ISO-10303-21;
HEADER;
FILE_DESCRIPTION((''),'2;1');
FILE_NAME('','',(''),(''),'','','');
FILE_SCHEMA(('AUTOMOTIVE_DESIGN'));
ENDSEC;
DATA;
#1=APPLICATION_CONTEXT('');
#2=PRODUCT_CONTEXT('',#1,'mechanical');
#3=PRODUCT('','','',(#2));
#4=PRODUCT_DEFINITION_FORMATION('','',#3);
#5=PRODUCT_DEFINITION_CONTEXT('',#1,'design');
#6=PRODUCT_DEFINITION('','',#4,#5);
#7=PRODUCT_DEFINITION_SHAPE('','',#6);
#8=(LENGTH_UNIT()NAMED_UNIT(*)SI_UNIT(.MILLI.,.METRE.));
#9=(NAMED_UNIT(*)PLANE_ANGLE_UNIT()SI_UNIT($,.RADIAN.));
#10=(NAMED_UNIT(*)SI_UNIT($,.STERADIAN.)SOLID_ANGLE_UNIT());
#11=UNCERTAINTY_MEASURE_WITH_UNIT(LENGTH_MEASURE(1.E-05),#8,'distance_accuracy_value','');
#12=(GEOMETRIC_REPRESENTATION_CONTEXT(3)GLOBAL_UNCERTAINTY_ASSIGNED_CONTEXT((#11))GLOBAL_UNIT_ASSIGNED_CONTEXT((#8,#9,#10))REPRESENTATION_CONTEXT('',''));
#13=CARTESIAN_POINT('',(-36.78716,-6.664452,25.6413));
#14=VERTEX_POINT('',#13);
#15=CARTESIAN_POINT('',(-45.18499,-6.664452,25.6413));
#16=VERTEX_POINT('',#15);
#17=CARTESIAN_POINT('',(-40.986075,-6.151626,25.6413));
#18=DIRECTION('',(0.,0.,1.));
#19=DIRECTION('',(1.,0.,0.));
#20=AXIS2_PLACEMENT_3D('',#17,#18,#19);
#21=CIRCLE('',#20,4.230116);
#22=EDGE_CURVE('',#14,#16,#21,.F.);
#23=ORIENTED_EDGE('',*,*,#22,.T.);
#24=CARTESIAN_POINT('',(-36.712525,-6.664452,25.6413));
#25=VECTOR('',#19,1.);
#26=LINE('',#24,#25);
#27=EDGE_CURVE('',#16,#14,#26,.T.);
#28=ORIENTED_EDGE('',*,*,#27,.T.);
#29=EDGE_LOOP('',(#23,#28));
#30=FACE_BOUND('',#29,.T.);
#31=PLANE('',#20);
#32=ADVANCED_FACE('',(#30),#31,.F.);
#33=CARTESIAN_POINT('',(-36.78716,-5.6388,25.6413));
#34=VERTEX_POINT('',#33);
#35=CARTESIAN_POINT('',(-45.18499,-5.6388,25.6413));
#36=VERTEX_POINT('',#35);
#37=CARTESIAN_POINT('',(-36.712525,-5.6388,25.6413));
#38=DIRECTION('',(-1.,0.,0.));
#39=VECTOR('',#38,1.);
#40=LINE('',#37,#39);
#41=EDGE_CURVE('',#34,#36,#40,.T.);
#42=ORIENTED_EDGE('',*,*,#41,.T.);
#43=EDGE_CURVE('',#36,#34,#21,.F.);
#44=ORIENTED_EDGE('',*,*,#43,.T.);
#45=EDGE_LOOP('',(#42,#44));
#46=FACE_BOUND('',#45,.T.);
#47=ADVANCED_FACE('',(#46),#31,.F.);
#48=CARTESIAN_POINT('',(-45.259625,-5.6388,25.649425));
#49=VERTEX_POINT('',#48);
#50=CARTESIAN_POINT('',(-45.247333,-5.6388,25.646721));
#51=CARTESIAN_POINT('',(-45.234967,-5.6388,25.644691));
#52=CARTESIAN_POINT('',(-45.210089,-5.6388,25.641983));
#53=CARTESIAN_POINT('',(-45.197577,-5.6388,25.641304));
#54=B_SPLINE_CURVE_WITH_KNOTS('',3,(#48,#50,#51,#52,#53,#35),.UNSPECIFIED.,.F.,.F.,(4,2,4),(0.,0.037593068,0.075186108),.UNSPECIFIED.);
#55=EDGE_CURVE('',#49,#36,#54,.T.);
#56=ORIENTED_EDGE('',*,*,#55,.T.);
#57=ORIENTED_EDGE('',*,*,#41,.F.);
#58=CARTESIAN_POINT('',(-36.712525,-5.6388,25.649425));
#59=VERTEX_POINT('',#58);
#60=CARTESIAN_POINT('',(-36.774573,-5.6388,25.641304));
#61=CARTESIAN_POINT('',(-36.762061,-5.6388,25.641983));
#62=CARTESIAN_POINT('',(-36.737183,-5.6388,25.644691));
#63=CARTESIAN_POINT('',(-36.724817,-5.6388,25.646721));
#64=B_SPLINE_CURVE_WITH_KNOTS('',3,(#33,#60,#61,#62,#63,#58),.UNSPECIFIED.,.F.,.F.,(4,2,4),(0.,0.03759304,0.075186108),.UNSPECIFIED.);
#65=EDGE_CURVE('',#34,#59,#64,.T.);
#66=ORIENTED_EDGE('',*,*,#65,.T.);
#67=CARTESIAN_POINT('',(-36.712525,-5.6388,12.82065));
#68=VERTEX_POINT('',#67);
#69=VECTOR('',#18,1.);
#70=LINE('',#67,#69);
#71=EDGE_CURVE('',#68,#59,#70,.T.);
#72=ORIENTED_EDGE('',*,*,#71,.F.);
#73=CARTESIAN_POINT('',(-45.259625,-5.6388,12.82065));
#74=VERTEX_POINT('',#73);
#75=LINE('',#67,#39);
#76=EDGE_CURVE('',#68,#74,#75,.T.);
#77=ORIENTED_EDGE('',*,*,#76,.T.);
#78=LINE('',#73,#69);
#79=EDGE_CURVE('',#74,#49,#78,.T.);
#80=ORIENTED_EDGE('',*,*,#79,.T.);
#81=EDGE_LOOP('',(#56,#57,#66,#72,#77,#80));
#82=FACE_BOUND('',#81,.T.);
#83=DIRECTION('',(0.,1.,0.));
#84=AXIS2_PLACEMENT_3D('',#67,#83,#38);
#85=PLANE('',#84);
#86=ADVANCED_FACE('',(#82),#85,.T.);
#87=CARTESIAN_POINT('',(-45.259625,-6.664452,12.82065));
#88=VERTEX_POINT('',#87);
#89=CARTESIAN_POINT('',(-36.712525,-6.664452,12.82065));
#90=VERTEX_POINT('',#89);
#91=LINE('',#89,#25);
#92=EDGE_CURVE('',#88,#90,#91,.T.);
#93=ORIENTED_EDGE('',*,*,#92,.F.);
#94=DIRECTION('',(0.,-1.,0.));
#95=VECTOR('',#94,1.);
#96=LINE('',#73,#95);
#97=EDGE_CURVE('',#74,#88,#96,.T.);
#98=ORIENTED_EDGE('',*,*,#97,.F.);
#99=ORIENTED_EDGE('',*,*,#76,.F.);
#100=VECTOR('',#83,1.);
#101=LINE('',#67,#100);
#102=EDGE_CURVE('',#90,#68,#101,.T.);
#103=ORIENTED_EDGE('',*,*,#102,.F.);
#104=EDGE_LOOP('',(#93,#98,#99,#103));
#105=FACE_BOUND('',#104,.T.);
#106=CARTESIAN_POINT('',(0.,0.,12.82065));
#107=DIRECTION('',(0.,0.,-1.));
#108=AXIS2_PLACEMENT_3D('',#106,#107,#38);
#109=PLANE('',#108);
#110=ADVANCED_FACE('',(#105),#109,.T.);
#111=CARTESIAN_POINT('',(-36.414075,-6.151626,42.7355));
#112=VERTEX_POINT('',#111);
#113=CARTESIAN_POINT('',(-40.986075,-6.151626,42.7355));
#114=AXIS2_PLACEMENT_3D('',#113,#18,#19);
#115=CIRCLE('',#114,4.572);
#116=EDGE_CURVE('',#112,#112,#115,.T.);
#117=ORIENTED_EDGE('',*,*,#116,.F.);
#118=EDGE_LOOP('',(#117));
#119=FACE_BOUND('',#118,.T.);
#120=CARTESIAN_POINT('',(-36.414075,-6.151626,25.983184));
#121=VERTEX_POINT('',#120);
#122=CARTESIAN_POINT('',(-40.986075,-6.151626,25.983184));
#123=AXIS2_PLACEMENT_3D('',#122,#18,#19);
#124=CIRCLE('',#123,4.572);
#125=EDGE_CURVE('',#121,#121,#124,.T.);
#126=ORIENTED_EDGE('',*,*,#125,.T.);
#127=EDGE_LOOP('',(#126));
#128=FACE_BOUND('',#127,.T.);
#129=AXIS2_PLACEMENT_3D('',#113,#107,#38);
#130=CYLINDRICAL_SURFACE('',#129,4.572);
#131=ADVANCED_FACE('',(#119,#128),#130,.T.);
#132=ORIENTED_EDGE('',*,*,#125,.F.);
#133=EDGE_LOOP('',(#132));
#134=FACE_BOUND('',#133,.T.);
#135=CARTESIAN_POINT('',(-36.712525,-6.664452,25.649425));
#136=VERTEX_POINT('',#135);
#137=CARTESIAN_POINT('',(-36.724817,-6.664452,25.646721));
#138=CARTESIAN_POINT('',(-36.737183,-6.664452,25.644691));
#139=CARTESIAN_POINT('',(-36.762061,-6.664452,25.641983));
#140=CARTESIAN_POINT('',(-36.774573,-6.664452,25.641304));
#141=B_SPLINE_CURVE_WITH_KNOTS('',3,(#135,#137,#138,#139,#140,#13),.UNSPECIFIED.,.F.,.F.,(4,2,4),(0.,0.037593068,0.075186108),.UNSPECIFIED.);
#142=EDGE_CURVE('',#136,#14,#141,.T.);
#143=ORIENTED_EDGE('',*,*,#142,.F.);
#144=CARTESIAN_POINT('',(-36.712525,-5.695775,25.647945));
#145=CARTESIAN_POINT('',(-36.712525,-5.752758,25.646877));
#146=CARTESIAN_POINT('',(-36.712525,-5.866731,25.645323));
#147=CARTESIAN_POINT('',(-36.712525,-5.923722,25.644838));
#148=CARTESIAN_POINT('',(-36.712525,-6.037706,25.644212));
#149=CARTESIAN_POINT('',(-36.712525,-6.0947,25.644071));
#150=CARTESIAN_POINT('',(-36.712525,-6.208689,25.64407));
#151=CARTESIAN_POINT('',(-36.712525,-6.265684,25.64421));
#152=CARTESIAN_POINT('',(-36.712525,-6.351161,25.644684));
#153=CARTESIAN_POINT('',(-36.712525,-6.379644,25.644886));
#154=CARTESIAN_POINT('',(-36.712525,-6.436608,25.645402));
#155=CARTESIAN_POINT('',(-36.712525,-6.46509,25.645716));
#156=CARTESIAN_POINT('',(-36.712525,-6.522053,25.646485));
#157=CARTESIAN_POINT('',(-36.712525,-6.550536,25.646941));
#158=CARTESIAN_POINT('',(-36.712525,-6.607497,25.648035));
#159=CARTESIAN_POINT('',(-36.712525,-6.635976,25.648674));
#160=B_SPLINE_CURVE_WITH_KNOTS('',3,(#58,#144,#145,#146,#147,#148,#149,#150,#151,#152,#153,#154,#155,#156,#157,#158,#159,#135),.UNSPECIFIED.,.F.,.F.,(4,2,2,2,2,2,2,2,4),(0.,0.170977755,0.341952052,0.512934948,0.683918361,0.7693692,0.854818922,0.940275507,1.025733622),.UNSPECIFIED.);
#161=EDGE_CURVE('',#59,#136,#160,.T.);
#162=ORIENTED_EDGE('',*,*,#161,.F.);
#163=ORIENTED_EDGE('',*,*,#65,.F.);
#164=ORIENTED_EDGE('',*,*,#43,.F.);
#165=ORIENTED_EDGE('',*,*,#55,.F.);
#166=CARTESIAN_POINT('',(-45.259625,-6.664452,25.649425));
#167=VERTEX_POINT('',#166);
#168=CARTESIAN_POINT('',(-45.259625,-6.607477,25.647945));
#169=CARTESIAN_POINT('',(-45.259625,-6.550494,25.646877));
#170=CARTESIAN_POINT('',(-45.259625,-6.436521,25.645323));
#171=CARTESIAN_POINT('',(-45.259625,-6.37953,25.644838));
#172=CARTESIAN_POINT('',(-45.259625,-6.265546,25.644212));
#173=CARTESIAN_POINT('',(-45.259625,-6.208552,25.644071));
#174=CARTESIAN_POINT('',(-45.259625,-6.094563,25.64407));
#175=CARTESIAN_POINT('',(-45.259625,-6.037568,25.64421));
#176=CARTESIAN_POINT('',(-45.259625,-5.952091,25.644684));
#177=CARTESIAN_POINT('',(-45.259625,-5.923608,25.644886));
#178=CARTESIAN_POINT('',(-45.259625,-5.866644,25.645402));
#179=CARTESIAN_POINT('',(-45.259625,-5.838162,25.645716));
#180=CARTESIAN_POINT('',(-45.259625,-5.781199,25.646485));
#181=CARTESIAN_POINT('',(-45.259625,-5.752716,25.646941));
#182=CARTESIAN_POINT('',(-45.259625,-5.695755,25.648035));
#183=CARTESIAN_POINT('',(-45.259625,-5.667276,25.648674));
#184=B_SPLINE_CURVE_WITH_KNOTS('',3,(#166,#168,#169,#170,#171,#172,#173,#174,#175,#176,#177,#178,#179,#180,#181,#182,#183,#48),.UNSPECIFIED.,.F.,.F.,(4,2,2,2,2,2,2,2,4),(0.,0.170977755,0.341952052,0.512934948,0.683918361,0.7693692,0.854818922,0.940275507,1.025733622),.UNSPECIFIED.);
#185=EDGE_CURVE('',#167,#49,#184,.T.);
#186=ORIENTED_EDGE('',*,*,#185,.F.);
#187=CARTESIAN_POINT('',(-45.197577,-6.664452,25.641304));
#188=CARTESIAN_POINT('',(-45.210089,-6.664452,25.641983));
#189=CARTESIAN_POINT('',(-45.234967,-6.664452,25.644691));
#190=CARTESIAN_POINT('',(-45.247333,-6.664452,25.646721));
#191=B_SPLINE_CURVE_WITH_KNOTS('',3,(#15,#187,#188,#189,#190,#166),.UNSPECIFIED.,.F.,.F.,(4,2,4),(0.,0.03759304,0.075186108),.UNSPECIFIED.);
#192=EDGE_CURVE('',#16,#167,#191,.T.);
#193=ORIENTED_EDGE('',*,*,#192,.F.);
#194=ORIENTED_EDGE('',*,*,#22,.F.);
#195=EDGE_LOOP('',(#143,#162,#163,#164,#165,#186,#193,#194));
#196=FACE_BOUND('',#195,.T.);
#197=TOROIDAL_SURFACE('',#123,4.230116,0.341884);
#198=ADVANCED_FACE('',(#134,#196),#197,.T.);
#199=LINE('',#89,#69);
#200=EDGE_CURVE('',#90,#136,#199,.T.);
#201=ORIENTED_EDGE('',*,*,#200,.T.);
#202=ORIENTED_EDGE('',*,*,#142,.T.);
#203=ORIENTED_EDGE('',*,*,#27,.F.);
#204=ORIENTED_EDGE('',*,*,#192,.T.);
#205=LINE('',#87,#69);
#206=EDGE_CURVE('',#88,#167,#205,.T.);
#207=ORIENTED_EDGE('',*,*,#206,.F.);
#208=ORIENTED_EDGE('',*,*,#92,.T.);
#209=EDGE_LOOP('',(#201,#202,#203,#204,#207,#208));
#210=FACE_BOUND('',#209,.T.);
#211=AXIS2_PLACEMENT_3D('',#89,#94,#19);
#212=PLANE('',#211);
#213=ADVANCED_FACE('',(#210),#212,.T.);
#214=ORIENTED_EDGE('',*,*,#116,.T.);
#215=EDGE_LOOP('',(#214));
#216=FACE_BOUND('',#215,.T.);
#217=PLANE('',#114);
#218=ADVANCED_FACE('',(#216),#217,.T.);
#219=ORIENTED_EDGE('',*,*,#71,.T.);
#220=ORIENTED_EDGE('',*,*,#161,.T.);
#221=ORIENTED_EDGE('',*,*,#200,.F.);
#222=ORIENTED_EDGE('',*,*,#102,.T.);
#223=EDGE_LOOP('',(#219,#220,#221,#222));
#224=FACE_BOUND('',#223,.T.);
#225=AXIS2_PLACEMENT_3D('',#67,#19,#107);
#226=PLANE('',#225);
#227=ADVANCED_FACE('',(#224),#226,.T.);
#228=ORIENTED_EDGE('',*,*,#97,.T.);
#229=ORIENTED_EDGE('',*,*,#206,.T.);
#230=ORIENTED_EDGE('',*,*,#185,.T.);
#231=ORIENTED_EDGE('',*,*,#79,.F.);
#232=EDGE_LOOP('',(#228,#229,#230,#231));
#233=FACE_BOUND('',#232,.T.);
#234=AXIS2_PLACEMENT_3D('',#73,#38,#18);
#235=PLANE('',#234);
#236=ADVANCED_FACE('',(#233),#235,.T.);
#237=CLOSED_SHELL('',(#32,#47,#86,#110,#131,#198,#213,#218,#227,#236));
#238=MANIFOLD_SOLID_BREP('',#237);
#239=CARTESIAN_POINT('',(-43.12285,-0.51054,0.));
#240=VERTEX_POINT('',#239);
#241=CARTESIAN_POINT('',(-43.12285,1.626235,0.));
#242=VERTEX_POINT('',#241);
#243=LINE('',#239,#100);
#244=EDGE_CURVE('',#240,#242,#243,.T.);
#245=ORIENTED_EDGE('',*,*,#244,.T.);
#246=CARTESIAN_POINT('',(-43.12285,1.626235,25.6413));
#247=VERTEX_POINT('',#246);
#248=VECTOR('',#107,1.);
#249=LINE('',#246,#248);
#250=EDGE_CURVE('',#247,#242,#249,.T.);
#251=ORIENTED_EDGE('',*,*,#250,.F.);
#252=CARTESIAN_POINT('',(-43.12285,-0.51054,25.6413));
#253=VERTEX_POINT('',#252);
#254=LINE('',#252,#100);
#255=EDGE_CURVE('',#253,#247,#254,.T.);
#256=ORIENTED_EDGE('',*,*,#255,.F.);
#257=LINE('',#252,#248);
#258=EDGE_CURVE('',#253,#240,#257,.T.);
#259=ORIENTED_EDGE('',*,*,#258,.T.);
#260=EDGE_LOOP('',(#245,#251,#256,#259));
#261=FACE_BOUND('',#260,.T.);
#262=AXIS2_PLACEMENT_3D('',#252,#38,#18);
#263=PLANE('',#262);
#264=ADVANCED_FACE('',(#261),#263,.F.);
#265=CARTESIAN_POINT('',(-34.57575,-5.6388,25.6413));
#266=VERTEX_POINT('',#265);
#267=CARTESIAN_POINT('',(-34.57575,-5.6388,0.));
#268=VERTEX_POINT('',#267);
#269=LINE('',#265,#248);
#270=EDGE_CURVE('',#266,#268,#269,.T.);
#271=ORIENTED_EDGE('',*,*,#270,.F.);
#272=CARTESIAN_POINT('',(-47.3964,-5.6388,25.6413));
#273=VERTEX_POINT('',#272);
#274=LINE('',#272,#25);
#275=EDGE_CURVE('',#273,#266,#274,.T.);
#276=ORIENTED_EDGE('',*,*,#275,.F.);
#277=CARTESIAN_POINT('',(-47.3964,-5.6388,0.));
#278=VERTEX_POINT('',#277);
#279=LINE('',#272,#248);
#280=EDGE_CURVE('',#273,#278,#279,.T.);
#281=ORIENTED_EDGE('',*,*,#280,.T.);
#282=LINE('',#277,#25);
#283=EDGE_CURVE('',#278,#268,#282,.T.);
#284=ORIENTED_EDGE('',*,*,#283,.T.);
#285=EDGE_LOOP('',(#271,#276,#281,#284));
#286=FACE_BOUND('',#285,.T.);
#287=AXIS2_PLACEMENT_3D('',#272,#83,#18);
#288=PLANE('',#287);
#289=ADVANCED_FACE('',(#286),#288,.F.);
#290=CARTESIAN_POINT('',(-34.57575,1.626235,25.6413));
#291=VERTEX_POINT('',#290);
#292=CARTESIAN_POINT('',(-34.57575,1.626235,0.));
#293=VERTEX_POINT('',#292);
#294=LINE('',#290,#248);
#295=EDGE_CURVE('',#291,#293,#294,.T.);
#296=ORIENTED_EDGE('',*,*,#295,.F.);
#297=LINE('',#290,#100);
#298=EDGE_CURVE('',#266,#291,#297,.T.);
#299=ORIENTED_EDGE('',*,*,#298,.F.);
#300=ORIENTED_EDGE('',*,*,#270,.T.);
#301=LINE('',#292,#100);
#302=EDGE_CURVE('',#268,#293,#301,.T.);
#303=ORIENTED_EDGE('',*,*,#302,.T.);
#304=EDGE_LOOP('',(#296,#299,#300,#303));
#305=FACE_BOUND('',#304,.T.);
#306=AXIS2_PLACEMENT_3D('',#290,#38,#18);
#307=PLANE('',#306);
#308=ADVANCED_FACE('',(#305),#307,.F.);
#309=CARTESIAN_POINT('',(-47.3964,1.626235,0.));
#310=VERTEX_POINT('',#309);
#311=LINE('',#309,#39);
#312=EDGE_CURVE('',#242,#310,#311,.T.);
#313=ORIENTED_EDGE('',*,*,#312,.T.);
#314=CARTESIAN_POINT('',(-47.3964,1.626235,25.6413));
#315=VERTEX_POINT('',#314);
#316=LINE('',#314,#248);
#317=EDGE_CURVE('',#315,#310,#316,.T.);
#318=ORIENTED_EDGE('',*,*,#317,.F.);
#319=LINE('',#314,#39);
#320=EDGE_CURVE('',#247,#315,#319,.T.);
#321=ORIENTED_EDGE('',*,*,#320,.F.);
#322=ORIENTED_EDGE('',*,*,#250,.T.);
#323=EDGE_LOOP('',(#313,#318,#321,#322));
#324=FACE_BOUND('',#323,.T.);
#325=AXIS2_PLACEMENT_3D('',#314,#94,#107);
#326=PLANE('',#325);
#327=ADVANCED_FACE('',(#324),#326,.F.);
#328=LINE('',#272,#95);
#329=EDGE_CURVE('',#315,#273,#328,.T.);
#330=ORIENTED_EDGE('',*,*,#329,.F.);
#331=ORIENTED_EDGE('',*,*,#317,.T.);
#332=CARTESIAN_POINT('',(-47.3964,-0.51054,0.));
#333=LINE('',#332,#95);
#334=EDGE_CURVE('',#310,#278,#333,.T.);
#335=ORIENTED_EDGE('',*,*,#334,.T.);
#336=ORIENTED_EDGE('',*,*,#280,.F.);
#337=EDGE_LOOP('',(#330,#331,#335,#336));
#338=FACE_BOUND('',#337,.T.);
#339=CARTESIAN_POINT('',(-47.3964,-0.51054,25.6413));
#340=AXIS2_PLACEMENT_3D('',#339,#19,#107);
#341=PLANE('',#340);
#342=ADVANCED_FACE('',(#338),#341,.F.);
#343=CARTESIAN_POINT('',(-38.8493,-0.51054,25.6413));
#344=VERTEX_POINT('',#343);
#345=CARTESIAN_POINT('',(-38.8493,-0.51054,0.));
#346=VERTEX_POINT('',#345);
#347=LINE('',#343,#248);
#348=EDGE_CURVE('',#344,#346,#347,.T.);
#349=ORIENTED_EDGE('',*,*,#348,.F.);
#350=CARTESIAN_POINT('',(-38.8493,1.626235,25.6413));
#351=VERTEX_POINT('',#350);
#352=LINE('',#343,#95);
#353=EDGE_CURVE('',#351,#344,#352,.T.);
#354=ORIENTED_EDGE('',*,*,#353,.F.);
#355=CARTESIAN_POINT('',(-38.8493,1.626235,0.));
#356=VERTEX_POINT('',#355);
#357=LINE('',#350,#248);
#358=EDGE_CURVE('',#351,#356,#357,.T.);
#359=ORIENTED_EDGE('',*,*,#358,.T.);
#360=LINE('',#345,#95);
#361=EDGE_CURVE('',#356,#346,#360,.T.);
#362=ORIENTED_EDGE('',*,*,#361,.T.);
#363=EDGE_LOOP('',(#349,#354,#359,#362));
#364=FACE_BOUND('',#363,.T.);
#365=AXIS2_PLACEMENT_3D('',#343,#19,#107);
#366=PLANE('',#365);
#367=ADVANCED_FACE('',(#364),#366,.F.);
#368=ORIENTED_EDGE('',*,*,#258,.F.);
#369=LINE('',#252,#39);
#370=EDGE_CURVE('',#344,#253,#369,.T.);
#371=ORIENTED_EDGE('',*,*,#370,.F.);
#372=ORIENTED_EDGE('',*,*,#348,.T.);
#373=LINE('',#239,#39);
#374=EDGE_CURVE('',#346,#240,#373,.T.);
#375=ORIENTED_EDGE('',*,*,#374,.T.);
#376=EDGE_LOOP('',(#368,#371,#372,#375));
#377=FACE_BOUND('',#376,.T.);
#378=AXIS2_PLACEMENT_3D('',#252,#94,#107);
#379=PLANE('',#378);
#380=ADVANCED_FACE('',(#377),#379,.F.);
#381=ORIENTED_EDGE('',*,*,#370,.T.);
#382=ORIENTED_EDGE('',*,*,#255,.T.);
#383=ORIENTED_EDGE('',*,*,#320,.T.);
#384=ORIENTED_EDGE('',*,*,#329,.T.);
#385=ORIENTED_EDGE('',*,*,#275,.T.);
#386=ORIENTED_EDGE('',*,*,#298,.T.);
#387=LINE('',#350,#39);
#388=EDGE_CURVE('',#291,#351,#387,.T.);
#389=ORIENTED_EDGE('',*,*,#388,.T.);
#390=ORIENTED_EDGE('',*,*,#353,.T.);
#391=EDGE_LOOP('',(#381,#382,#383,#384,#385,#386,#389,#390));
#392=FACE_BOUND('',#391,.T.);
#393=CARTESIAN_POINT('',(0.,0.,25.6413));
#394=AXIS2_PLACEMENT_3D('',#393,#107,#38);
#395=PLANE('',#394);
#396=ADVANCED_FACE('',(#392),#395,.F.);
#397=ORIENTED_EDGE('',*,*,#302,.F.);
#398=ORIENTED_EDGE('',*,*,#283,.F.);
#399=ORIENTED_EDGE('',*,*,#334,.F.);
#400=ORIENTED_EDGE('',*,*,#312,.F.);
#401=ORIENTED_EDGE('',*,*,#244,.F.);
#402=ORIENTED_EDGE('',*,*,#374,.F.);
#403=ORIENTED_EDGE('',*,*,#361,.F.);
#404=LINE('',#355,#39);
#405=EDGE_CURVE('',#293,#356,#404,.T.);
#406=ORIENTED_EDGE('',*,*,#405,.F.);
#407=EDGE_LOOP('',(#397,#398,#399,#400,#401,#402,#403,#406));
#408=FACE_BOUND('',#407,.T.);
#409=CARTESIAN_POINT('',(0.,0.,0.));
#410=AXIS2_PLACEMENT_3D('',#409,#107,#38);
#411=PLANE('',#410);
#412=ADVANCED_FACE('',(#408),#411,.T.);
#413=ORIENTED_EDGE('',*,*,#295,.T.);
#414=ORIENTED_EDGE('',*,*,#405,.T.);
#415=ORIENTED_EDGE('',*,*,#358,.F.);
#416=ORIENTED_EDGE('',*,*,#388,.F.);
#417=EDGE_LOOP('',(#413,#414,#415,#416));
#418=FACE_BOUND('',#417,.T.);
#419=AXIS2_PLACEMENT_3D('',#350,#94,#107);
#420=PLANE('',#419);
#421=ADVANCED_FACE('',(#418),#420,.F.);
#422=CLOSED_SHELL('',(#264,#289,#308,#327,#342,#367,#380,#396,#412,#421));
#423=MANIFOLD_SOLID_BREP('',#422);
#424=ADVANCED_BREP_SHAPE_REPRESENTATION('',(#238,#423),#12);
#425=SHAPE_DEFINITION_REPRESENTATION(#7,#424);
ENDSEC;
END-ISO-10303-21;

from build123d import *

# Parameters (mm, degrees)
BOSS_EXTRUDE1_DEPTH = 25.6413
SKETCH2_W           = 8.5471
SKETCH2_H           = 1.025652
BOSS_EXTRUDE2_DEPTH = 12.82065
SKETCH3_R           = 4.572
BOSS_EXTRUDE3_DEPTH = 17.0942
FILLET11_R          = 0.341884


with BuildPart() as part:
    # Sketch1 → Boss-Extrude1 (new body)
    with BuildSketch(Plane.XY):
        Polygon((-38.8493, -0.51054), (-38.8493, 1.626235), (-34.57575, 1.626235), (-34.57575, -5.6388), (-47.3964, -5.6388), (-47.3964, -0.51054), (-47.3964, 1.626235), (-43.12285, 1.626235), (-43.12285, -0.51054), align=None)
    extrude(amount=BOSS_EXTRUDE1_DEPTH)


with BuildPart() as body_2:
    # Sketch2 → Boss-Extrude2 (new body)
    with BuildSketch(Plane.XY.offset(25.6413)):
        with Locations((-40.986075, -6.151626)):
            Rectangle(SKETCH2_W, SKETCH2_H)
    extrude(amount=-BOSS_EXTRUDE2_DEPTH)

    # Sketch3 → Boss-Extrude3 (add)
    with BuildSketch(Plane.XY.offset(25.6413)):
        with Locations((-40.986075, -6.151626)):
            Circle(SKETCH3_R)
    extrude(amount=BOSS_EXTRUDE3_DEPTH)

    # Fillet11
    # the kernel refuses this fillet: 0.341884 mm, written as the material it takes off along each edge
    with BuildSketch(Plane(origin=(-40.986075, -6.151626, 25.6413), x_dir=(1, 0, 0), z_dir=(0, -1, 0))) as fillet11_piece_1_section:
        with BuildLine():
            CenterArc((4.572 - FILLET11_R, FILLET11_R), FILLET11_R, 270, 90)
            Line((4.572 - FILLET11_R, 0), (4.572, 0))
            Line((4.572, 0), (4.572, FILLET11_R))
        make_face()
    fillet11_piece_1 = revolve(axis=Axis((-40.986075, -6.151626, 25.6413), (0, 0, 1)), mode=Mode.PRIVATE)
    fillet11_piece_1 = split(fillet11_piece_1, bisect_by=Plane(origin=(-36.712525, -6.151626373, 25.717911182), z_dir=(1, 0, 0)), keep=Keep.TOP, mode=Mode.PRIVATE)
    add(fillet11_piece_1, mode=Mode.SUBTRACT)
    with BuildSketch(Plane(origin=(-40.986075, -6.151626, 25.6413), x_dir=(1, 0, 0), z_dir=(0, -1, 0))) as fillet11_piece_2_section:
        with BuildLine():
            CenterArc((4.572 - FILLET11_R, FILLET11_R), FILLET11_R, 270, 90)
            Line((4.572 - FILLET11_R, 0), (4.572, 0))
            Line((4.572, 0), (4.572, FILLET11_R))
        make_face()
    fillet11_piece_2 = revolve(axis=Axis((-40.986075, -6.151626, 25.6413), (0, 0, 1)), mode=Mode.PRIVATE)
    fillet11_piece_2 = split(fillet11_piece_2, bisect_by=Plane(origin=(-40.986075, -5.6388, 25.736787981), z_dir=(0, 1, 0)), keep=Keep.TOP, mode=Mode.PRIVATE)
    add(fillet11_piece_2, mode=Mode.SUBTRACT)
    with BuildSketch(Plane(origin=(-40.986075, -6.151626, 25.6413), x_dir=(1, 0, 0), z_dir=(0, -1, 0))) as fillet11_piece_3_section:
        with BuildLine():
            CenterArc((4.572 - FILLET11_R, FILLET11_R), FILLET11_R, 270, 90)
            Line((4.572 - FILLET11_R, 0), (4.572, 0))
            Line((4.572, 0), (4.572, FILLET11_R))
        make_face()
    fillet11_piece_3 = revolve(axis=Axis((-40.986075, -6.151626, 25.6413), (0, 0, 1)), mode=Mode.PRIVATE)
    fillet11_piece_3 = split(fillet11_piece_3, bisect_by=Plane(origin=(-36.749842277, -6.664452, 25.642654228), z_dir=(0, -1, 0)), keep=Keep.TOP, mode=Mode.PRIVATE)
    add(fillet11_piece_3, mode=Mode.SUBTRACT)
    with BuildSketch(Plane(origin=(-40.986075, -6.151626, 25.6413), x_dir=(1, 0, 0), z_dir=(0, -1, 0))) as fillet11_piece_4_section:
        with BuildLine():
            CenterArc((4.572 - FILLET11_R, FILLET11_R), FILLET11_R, 270, 90)
            Line((4.572 - FILLET11_R, 0), (4.572, 0))
            Line((4.572, 0), (4.572, FILLET11_R))
        make_face()
    fillet11_piece_4 = revolve(axis=Axis((-40.986075, -6.151626, 25.6413), (0, 0, 1)), mode=Mode.PRIVATE)
    fillet11_piece_4 = split(fillet11_piece_4, bisect_by=Plane(origin=(-45.259625, -6.151625497, 25.717911335), z_dir=(-1, 0, 0)), keep=Keep.TOP, mode=Mode.PRIVATE)
    add(fillet11_piece_4, mode=Mode.SUBTRACT)


solid = Compound([part.part, body_2.part])
